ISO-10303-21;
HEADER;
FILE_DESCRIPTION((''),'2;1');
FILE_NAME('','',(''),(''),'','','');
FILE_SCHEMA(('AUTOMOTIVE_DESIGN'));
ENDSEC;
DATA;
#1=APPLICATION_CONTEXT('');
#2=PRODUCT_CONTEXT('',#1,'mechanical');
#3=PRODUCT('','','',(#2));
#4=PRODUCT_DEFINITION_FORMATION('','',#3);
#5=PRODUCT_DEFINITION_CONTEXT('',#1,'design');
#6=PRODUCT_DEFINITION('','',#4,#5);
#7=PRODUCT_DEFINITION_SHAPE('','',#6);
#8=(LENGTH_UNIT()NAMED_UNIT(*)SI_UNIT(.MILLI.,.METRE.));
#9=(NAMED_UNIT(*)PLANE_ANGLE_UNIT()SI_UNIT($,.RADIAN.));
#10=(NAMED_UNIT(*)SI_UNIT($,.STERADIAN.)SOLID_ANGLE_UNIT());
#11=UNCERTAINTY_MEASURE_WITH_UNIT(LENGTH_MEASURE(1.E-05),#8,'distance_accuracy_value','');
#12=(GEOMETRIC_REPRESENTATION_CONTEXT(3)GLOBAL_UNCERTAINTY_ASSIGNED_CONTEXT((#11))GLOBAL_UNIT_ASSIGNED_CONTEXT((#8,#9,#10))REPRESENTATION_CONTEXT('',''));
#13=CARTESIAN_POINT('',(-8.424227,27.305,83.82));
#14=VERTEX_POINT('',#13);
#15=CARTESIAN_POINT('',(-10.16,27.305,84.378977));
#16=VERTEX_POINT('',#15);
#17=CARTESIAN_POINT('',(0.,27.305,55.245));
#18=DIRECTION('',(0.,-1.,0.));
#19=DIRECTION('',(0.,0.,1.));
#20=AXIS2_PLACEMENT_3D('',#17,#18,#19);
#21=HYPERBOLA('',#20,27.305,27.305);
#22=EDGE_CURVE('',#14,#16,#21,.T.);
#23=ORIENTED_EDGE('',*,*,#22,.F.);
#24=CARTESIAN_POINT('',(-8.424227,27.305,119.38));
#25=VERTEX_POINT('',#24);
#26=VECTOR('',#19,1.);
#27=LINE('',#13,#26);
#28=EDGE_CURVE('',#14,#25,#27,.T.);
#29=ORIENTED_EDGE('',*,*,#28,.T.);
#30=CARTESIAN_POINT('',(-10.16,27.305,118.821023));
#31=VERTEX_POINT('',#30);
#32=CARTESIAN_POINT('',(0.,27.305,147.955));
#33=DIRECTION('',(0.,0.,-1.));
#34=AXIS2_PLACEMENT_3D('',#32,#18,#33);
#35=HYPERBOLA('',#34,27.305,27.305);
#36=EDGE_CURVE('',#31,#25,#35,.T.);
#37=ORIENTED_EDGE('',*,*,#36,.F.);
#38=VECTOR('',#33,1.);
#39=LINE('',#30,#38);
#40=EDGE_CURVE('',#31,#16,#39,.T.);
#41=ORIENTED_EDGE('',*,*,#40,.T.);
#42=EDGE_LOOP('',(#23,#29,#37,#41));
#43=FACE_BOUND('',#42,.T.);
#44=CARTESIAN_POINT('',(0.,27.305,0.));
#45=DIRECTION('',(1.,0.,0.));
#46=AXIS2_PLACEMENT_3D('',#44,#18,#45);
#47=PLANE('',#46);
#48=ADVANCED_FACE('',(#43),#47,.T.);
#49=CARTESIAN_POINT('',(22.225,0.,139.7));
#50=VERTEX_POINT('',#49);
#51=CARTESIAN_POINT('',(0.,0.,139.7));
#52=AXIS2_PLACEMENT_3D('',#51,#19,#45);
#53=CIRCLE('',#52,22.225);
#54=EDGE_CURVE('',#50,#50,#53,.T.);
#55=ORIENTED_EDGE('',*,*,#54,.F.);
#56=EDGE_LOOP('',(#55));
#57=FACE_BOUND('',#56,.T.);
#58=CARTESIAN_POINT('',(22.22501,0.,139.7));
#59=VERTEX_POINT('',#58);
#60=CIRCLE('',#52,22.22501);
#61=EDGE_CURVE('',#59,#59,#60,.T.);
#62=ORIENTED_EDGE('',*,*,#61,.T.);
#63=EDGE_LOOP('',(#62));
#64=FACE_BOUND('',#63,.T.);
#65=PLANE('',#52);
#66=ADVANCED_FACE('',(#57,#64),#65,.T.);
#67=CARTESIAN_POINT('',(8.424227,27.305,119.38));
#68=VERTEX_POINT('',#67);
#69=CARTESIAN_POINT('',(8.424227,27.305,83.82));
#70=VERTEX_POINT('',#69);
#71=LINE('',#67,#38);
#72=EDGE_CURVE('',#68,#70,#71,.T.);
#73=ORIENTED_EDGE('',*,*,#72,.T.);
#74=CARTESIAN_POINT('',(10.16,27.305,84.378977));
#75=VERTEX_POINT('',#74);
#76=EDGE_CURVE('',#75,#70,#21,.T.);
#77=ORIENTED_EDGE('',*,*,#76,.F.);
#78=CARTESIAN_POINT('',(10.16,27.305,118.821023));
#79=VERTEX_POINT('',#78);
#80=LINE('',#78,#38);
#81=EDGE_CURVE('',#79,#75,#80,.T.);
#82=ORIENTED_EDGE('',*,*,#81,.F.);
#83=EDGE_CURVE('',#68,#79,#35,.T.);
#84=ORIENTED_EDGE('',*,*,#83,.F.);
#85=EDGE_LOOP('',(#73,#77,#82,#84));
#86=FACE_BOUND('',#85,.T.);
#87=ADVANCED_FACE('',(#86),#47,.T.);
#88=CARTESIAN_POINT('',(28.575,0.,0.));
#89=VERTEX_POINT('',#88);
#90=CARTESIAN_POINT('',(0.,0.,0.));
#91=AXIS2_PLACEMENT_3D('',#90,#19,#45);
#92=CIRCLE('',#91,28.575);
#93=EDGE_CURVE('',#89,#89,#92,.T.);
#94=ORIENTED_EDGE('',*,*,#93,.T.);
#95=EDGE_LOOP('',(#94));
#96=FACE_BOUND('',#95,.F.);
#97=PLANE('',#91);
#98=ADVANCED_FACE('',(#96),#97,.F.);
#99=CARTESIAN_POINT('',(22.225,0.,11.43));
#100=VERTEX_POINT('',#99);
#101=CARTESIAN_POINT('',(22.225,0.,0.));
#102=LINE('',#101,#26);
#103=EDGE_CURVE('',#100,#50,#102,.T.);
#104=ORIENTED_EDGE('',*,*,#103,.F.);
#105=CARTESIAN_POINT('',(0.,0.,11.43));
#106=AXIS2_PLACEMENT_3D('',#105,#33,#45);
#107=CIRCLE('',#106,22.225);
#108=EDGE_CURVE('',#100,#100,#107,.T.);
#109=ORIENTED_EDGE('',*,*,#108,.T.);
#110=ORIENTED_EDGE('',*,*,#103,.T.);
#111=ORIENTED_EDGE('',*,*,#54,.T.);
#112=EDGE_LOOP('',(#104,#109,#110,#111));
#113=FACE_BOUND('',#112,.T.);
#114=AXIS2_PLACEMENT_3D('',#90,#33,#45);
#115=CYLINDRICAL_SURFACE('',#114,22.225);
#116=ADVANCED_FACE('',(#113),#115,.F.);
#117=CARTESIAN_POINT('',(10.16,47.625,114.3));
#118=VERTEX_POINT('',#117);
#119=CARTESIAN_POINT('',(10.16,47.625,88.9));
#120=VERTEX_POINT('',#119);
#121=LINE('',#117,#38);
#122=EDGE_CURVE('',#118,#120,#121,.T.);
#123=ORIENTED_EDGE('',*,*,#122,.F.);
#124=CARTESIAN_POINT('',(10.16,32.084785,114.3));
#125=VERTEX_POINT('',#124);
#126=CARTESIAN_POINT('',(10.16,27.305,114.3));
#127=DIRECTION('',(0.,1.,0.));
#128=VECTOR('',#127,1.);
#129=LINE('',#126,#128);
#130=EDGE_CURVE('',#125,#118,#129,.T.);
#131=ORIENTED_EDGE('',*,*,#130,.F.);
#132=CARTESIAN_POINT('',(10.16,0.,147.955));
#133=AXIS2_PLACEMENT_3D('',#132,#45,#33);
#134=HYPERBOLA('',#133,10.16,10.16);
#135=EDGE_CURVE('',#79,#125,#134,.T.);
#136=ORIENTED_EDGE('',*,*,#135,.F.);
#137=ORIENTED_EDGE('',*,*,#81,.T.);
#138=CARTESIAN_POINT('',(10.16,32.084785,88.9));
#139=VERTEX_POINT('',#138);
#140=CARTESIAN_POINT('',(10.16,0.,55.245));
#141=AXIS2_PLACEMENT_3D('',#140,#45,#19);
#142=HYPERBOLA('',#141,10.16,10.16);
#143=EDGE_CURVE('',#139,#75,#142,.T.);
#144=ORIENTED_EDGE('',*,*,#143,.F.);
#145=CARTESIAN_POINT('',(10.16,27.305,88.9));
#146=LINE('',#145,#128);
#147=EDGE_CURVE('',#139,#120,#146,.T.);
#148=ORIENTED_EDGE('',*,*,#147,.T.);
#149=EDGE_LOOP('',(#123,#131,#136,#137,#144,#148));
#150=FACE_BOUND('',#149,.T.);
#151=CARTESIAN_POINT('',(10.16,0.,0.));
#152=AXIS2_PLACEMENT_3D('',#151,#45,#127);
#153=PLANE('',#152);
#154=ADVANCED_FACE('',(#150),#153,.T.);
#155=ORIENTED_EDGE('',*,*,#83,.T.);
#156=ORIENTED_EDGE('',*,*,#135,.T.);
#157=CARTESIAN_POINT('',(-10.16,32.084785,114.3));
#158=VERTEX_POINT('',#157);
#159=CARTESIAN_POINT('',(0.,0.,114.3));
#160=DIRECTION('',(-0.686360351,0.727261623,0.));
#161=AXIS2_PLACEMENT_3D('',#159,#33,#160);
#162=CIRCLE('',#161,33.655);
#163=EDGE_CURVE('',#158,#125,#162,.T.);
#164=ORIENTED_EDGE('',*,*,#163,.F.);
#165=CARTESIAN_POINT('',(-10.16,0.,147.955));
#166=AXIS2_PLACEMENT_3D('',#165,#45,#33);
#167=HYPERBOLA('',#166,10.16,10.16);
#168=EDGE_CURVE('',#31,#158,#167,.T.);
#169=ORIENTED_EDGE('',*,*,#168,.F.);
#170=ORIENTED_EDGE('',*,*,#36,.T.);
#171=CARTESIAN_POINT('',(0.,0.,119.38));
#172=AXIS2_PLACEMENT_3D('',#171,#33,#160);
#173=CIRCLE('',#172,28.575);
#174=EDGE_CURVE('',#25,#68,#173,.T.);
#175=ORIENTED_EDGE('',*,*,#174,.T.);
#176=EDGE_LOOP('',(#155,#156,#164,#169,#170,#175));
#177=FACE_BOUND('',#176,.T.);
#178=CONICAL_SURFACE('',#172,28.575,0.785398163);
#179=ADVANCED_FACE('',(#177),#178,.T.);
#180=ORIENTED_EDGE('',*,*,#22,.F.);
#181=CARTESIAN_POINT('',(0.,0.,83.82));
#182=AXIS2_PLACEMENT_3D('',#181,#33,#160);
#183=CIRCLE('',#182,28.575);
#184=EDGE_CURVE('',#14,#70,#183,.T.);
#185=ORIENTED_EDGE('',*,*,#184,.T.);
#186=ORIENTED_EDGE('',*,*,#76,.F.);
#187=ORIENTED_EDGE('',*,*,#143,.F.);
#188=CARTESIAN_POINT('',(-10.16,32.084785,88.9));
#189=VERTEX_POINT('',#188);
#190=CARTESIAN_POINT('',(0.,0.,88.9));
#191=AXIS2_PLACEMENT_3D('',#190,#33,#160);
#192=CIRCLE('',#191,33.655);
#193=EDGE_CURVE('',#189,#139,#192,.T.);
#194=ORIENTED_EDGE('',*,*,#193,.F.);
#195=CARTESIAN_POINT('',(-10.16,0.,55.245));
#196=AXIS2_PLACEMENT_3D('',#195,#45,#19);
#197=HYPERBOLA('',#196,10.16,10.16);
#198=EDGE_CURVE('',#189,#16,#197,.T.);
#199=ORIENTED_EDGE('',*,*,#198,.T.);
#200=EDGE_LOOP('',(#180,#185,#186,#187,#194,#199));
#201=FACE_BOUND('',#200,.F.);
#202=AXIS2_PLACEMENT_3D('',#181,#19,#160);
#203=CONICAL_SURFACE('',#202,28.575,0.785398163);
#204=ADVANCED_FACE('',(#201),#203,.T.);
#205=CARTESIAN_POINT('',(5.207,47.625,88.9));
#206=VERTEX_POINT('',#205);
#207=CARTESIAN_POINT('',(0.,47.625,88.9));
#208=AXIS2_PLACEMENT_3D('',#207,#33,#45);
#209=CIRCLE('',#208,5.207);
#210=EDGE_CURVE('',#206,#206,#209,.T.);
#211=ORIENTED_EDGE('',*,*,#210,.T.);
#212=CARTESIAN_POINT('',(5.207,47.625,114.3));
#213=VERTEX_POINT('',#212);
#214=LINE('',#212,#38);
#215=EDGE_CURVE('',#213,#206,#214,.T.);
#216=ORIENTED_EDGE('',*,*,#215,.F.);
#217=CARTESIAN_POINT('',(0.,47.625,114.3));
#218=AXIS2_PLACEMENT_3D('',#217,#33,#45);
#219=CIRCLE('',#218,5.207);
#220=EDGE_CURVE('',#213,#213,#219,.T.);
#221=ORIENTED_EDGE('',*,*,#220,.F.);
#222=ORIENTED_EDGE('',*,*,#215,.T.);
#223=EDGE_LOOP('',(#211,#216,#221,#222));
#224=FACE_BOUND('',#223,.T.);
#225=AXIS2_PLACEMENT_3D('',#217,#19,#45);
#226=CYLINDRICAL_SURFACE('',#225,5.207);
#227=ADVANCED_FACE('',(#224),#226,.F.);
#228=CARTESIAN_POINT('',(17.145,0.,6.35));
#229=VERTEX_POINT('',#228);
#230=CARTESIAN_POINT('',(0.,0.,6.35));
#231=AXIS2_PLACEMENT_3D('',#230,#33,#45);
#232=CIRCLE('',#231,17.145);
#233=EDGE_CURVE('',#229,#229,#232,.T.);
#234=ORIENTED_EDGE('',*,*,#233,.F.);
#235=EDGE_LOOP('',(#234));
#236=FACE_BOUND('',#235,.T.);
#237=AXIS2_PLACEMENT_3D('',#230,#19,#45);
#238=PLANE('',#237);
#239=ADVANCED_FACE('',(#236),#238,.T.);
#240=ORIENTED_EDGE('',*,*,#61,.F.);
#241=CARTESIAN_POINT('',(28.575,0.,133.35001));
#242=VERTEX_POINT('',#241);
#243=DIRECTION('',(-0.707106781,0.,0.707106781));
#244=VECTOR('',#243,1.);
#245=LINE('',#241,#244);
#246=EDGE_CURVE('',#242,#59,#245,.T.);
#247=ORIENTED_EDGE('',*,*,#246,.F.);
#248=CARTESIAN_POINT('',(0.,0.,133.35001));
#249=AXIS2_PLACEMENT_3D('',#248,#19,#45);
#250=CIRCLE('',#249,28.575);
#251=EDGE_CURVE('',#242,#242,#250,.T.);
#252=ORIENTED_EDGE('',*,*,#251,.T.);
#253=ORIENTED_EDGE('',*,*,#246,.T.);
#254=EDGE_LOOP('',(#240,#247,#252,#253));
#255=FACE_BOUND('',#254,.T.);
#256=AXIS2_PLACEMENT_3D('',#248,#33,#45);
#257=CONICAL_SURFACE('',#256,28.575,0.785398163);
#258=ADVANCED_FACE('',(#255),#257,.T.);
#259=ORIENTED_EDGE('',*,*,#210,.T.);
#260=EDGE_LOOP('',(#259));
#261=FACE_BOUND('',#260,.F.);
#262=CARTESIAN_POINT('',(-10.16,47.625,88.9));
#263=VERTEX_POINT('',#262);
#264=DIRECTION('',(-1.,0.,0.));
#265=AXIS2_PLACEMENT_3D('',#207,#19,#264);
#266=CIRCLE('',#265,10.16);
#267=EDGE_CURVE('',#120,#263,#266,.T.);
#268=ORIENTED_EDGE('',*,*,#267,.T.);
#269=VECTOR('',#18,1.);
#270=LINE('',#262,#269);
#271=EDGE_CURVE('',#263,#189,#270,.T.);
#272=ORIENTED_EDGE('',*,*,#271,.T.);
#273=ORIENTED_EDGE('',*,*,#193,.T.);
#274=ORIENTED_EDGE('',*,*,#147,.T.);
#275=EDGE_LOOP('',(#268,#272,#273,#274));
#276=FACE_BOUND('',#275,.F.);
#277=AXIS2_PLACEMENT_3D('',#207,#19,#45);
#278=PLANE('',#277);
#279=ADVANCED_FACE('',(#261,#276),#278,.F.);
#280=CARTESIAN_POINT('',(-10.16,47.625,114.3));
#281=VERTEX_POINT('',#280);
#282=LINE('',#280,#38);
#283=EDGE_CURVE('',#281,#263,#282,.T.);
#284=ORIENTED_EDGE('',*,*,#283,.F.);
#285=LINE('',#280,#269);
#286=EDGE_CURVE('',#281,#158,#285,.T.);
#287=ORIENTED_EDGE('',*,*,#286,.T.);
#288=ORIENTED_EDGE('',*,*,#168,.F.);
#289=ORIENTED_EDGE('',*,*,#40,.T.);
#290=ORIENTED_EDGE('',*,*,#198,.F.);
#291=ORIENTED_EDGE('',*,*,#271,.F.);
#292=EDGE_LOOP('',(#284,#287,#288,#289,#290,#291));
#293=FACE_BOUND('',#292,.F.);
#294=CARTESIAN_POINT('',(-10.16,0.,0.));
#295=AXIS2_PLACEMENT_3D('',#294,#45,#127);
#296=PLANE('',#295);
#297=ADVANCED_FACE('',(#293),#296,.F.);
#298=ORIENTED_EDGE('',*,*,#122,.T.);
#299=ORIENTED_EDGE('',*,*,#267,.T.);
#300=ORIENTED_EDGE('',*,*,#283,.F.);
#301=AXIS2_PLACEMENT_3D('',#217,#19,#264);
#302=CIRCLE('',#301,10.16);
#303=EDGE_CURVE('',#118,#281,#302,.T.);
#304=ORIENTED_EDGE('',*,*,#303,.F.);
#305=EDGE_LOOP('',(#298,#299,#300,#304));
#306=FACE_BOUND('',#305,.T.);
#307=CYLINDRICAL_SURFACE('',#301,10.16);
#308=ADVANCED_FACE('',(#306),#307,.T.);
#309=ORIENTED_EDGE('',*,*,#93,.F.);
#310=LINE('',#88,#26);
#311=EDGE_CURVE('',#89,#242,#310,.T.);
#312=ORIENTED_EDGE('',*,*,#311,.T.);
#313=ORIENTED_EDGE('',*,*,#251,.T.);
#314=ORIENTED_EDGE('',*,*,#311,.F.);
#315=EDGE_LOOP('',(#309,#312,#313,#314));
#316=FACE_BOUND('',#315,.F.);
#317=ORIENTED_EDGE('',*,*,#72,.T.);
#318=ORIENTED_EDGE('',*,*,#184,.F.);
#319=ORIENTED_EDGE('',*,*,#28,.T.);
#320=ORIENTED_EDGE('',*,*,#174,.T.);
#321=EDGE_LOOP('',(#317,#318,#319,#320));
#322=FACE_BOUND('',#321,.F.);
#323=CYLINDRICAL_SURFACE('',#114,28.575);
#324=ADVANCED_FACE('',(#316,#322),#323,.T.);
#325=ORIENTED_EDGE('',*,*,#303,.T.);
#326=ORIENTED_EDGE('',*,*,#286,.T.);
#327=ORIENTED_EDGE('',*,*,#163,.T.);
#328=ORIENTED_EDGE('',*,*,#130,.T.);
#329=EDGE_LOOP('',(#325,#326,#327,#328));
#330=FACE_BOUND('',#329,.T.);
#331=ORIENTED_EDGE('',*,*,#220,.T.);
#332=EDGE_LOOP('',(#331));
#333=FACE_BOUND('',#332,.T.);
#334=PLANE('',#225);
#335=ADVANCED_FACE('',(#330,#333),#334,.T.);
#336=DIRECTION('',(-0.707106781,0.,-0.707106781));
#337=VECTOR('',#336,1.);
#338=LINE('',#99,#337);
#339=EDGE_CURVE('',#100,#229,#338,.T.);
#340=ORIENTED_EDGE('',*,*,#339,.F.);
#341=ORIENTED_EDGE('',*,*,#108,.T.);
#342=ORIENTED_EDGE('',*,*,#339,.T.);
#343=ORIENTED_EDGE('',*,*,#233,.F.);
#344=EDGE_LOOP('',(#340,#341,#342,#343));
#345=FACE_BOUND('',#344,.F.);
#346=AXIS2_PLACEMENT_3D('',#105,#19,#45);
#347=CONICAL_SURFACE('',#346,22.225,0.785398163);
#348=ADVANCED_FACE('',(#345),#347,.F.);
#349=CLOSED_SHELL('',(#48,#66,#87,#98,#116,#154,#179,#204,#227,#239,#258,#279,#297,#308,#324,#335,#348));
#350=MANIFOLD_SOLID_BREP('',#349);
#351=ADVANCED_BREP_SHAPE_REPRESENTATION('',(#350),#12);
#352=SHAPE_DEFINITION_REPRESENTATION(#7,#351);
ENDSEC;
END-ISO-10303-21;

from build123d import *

# Parameters (mm, degrees)
F0_R         = 28.575
F1_DEPTH     = 139.7
F2_T         = -6.35
F5_DEPTH     = 25.4
F7_SIZE      = 6.34999
F8_T4_ANGLE  = 86.6853703019
F8_T11_ANGLE = 86.6853703019


# Not quite as in the source:
# - a fillet or chamfer that OpenCascade refuses, or shapes differently, is made with other operations: its cross-section is extruded or revolved along the edge and cut away or added
# - two fillets or chamfers of one size are made in one step
# - a fillet or chamfer is up to 0.001 mm smaller than in the source, because OpenCascade refuses the exact size


with BuildPart() as f1:
    # F0 (on Top) → F1 (new body)
    with BuildSketch(Plane.XY):
        Circle(F0_R)
    extrude(amount=F1_DEPTH)

    # F2
    f2_openings = [f1.faces().sort_by_distance(p)[0] for p in [
        (0, 0, 139.7),
    ]]
    offset(amount=F2_T, openings=f2_openings)

    # F4 (on offset) → F5 (join)
    with BuildSketch(Plane.XY.offset(114.3)):
        with BuildLine():
            ThreePointArc((10.16, 47.625), (0, 57.785), (-10.16, 47.625))
            ThreePointArc((-10.16, 47.625), (0, 37.465), (10.16, 47.625))
        make_face()
        with BuildLine():
            ThreePointArc((-5.207, 47.625), (0, 52.832), (5.207, 47.625))
            ThreePointArc((5.207, 47.625), (0, 42.418), (-5.207, 47.625))
        make_face(mode=Mode.SUBTRACT)
        with BuildLine():
            ThreePointArc((10.16, 47.625), (0, 37.465), (-10.16, 47.625))
            Line((-10.16, 47.625), (-10.16, 27.305))
            Line((-10.16, 27.305), (10.16, 27.305))
            Line((10.16, 27.305), (10.16, 47.625))
        make_face()
    extrude(amount=-F5_DEPTH)

    # F6: union 

    # F7 (size 6.35 in the source; OpenCascade refuses exactly that, so slightly less here)
    f7_edges = [f1.edges().sort_by_distance(p)[0] for p in [
        (-28.575, 0, 139.7),
    ]]
    chamfer(f7_edges, length=F7_SIZE)

    # F8: chamfer of 5.08 on 3 edges, made by hand


with BuildPart() as f8_tool2:
    # F8_s3 → F8_t4 (revolve)
    with BuildSketch(Plane(origin=(0, 0, 0), x_dir=(0, 0, 1), z_dir=(-0.7272616235, -0.6863603507, 0))):
        Polygon((119.38, 28.575), (114.3, 33.655), (114.3, 28.575), align=None)
    revolve(axis=Axis((0, 0, 114.3), (0, 0, -1)), revolution_arc=F8_T4_ANGLE)

    split(bisect_by=Plane.XZ.offset(-27.305), keep=Keep.BOTTOM)

    split(bisect_by=Plane.YZ.offset(10.16), keep=Keep.BOTTOM)

    split(bisect_by=Plane.YZ.offset(-10.16), keep=Keep.TOP)


with BuildPart() as f1_1:
    add(f1.part)

    # F8_t1: union F8_tool2
    add(f8_tool2.part)


with BuildPart() as f8_tool9:
    # F8_s10 → F8_t11 (revolve)
    with BuildSketch(Plane(origin=(0, 0, 0), x_dir=(0, 0, 1), z_dir=(-0.7272616235, -0.6863603507, 0))):
        Polygon((83.82, 28.575), (88.9, 33.655), (88.9, 28.575), align=None)
    revolve(axis=Axis((0, 0, 88.9), (0, 0, -1)), revolution_arc=F8_T11_ANGLE)

    split(bisect_by=Plane.XZ.offset(-27.305), keep=Keep.BOTTOM)

    split(bisect_by=Plane.YZ.offset(10.16), keep=Keep.BOTTOM)

    split(bisect_by=Plane.YZ.offset(-10.16), keep=Keep.TOP)


with BuildPart() as f1_2:
    add(f1_1.part)

    # F8_t8: union F8_tool9
    add(f8_tool9.part)

    # F8_s15 → F8_t16 (revolve)
    with BuildSketch(Plane.XZ):
        Polygon((22.225, 11.43), (17.145, 6.35), (22.225, 6.35), align=None)
    revolve(axis=Axis((0, 0, 6.35), (0, 0, -1)))


solid = f1_2.part
